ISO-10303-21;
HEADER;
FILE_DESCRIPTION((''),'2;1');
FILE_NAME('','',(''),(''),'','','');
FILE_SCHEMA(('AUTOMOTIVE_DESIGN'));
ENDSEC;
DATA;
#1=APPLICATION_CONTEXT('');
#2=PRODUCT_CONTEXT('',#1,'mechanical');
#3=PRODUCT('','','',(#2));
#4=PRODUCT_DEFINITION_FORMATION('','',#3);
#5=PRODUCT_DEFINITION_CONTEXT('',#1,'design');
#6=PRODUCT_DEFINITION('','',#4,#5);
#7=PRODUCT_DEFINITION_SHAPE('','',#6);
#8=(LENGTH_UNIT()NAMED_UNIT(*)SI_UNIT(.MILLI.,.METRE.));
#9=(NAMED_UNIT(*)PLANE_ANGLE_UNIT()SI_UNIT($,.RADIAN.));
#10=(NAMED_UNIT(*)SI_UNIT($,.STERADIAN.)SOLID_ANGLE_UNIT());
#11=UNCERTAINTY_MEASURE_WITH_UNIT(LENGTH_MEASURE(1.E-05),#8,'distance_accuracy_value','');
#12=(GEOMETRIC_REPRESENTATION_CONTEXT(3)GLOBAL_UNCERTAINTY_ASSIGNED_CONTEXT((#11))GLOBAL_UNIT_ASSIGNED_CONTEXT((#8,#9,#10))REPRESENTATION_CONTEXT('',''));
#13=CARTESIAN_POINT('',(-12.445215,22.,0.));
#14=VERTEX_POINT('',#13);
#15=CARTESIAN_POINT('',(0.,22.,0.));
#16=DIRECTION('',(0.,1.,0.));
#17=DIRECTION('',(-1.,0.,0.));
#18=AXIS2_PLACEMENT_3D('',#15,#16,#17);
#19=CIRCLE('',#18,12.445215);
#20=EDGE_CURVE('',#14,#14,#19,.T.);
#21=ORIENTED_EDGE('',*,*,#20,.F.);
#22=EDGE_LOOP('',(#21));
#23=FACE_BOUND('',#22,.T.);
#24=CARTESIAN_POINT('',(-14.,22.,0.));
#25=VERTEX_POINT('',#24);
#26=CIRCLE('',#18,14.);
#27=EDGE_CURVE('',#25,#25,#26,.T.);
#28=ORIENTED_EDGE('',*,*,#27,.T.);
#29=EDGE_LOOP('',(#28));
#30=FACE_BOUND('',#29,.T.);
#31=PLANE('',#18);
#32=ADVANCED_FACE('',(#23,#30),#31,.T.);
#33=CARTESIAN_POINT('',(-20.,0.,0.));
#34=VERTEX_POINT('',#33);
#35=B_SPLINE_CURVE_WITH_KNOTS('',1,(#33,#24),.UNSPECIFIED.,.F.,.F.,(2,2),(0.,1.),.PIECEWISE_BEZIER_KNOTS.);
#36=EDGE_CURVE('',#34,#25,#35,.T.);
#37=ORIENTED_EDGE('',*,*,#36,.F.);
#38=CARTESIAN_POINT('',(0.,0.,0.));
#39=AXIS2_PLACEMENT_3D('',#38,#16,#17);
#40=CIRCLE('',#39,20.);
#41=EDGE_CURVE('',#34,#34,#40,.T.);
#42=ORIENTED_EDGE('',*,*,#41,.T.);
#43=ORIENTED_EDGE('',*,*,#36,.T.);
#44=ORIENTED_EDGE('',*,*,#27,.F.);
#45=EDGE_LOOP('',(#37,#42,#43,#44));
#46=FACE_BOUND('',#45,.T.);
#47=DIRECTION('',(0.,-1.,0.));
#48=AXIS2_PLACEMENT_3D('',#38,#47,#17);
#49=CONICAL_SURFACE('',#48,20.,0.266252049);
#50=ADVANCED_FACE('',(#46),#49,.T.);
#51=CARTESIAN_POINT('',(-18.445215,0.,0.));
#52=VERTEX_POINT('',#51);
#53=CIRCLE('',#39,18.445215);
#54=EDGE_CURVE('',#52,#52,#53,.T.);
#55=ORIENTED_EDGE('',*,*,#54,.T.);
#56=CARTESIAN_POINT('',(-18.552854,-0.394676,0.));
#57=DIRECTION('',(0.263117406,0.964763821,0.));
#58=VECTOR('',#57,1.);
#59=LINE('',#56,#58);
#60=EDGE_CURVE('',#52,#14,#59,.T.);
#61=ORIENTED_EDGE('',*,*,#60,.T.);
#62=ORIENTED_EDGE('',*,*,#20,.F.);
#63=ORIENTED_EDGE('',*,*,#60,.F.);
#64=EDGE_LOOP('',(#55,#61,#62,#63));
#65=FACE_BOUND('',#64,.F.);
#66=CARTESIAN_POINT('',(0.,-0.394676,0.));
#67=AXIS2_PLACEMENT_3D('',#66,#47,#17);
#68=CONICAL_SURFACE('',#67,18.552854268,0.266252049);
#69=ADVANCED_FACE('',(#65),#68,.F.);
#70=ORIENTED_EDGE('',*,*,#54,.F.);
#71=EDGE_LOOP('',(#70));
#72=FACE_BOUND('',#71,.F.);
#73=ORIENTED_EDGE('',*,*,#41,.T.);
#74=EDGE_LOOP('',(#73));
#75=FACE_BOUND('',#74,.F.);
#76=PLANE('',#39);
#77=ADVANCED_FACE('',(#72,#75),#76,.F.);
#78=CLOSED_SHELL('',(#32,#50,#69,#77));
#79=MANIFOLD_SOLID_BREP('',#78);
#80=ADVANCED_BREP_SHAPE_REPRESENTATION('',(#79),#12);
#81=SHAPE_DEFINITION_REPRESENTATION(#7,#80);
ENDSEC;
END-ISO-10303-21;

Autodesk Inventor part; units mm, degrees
ref_plane "YZ Plane" through (0, 0, 0) normal (1, 0, 0) x (0, 1, 0)
ref_plane "XY Plane" through (0, 0, 0) normal (0, 0, 1) x (1, 0, 0)
sketch "Szkic6" plane through (0, 0, 0) normal (0, 1, 0) x (-1, 0, 0)
  circle A0 centre (0, 0) radius 20
  dimension "d33" = 40
ref_plane "Płaszczyzna konstrukcyjna1" through (0, 22, 0) normal (0, 1, 0) x (-1, 0, 0)
sketch "Szkic7" plane through (0, 22, 0) normal (0, 1, 0) x (-1, 0, 0)
  circle A0 centre (0, 0) radius 14
  dimension "d35" = 28
loft "Wyciągnięcie złożone1" add profiles "Szkic6", "Szkic7"
shell "Skorupa1" thickness 1.5 removed faces 2 at (-0.5625, 22, 1.5565) at (2.364, 0, 6.2334)
equation "\"d33\" = OD1"
equation "\"d35\" = OD2"
equation "\"d52\" = THK"
equation "\"SzerokośćGięciaPodcięcia\" = Grubość"
equation "\"RozmiarPodcięciaNarożnika\" = 4 * Grubość"
equation "\"PromieńPrzejścia\" = PromieńGięcia"
equation "\"Rozmiar_promienia_Jacobiego\" = PromieńGięcia"
equation "\"Wielk_odstępu\" = Grubość"
equation "\"d2\" = PromieńGięcia"
equation "\"d23\" = PromieńGięcia"
equation "\"OD1\" = 40"
equation "\"OD2\" = 28"
equation "\"L\" = 22"
equation "\"THK\" = 1.5"
equation "\"d34\" = L"
equation "\"Grubość\" = 1.5"
equation "\"PromieńGięcia\" = 3"
properties part number "Redukcja symetryczna Ø40x28x1,5 L=22" material "304"
